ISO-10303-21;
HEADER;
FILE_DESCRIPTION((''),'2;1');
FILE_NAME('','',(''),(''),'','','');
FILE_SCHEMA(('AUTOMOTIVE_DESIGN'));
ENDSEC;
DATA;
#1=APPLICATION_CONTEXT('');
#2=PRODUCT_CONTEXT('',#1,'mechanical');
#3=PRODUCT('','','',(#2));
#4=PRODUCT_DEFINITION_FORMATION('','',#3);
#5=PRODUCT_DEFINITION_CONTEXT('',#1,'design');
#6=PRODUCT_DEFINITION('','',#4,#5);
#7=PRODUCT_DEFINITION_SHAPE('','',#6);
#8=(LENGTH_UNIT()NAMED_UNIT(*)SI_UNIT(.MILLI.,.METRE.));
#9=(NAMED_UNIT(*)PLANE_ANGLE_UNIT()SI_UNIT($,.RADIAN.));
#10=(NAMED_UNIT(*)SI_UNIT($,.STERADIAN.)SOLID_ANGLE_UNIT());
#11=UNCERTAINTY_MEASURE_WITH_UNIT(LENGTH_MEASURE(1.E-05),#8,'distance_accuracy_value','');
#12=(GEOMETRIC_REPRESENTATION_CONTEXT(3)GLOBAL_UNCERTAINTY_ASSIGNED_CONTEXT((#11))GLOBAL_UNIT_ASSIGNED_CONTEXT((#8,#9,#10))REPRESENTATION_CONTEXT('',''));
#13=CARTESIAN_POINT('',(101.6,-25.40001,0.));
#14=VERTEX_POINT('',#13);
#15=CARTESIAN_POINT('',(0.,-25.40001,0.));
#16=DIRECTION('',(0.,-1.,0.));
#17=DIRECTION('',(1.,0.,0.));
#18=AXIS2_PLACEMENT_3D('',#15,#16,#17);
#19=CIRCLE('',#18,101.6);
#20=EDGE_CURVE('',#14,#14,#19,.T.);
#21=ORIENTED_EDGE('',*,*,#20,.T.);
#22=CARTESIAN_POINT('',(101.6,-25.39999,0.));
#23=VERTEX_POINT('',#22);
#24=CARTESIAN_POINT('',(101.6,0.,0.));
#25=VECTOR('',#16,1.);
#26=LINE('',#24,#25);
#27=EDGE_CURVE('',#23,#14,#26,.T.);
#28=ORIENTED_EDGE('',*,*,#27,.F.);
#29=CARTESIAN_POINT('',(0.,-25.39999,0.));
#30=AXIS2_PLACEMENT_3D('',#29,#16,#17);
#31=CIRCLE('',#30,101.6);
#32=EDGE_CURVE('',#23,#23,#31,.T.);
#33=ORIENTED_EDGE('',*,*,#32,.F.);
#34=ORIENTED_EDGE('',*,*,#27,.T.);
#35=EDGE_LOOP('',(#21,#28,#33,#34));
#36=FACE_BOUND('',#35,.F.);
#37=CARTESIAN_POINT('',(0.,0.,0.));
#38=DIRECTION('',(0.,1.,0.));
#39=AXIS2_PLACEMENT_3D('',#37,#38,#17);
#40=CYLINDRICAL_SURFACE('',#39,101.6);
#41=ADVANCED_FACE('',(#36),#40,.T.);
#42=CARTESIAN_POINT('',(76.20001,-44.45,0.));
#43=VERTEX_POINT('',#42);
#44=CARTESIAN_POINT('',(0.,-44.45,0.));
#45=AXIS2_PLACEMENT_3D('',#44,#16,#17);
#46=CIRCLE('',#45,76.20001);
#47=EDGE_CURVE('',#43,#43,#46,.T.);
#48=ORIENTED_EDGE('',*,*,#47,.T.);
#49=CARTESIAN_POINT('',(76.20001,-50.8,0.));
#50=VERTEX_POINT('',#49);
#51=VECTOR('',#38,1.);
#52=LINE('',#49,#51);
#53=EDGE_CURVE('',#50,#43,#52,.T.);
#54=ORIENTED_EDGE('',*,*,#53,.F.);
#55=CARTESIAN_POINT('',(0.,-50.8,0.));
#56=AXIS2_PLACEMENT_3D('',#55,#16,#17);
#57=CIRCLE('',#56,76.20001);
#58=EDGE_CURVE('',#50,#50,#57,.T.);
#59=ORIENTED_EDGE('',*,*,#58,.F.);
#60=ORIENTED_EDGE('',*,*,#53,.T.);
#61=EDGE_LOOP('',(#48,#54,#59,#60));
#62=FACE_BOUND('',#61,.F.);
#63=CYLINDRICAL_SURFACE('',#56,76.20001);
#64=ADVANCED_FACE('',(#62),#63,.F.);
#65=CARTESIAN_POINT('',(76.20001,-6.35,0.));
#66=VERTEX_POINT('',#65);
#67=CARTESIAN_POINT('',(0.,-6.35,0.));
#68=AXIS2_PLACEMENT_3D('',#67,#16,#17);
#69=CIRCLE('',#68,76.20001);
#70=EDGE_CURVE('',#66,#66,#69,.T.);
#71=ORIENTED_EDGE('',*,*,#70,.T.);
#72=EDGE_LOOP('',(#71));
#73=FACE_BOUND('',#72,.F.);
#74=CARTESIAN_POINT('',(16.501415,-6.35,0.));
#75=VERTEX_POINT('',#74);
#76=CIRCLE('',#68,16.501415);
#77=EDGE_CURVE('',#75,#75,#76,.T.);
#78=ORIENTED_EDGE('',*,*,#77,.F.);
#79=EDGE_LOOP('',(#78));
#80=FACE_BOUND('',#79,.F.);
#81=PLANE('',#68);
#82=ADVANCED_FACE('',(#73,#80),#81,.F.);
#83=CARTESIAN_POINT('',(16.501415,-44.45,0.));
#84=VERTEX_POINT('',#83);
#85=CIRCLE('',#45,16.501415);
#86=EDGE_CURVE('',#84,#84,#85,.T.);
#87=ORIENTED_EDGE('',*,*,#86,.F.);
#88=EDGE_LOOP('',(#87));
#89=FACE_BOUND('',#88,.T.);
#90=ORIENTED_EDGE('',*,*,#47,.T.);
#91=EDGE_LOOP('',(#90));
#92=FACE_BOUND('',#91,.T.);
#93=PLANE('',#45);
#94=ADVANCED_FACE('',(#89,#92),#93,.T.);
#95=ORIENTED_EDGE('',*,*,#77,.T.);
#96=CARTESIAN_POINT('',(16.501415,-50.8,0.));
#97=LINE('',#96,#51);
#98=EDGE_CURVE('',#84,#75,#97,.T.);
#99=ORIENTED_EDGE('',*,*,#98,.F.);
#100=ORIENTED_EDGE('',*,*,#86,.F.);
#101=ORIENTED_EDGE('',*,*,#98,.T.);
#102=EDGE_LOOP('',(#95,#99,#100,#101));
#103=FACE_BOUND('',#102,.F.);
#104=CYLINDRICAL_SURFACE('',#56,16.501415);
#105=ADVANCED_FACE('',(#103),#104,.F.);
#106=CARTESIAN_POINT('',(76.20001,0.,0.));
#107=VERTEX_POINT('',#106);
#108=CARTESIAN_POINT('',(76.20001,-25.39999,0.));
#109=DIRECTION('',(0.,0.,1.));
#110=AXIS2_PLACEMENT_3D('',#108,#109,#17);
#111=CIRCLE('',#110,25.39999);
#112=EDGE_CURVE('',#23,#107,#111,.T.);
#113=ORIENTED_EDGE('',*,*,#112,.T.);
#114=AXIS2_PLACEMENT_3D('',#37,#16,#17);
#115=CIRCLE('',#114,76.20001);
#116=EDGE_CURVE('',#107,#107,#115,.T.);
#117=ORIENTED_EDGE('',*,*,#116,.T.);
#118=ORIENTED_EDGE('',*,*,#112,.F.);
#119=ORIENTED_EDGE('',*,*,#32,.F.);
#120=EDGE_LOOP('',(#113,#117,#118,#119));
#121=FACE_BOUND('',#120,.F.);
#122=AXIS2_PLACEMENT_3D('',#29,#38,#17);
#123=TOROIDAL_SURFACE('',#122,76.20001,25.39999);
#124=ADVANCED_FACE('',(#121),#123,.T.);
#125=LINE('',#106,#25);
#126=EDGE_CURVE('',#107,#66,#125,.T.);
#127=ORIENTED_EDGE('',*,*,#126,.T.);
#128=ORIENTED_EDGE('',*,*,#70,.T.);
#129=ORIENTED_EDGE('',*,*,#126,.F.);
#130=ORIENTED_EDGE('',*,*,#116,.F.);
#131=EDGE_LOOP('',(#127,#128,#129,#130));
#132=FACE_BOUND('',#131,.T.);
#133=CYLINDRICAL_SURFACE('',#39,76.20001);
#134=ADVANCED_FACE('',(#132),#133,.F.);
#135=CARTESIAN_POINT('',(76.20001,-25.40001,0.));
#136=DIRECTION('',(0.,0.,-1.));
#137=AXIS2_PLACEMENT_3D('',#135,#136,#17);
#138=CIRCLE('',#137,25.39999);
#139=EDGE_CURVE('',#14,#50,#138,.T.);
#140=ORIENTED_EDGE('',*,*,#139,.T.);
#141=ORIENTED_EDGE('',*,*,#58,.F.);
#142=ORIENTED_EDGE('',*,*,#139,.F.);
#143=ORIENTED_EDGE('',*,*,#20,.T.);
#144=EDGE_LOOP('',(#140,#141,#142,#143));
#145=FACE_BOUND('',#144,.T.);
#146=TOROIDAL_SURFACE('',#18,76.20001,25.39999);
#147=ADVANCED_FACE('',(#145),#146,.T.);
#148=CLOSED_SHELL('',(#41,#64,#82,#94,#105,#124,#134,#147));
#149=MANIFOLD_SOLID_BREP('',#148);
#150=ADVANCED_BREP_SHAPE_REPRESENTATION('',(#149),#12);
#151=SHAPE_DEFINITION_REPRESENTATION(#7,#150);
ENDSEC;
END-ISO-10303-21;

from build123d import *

# Parameters (mm, degrees)
F0_R     = 101.6
F1_DEPTH = 50.8
F2_R     = 25.39999
F3_R     = 16.5014152295
F4_DEPTH = 50.801
F5_DEPTH = 6.35
F6_DEPTH = 6.35


# Not quite as in the source:
# - a fillet or chamfer is up to 0.001 mm smaller than in the source, because OpenCascade refuses the exact size


with BuildPart() as f1:
    # F0 (on Front) → F1 (new body)
    with BuildSketch(Plane.XZ):
        Circle(F0_R)
    extrude(amount=F1_DEPTH)

    # F2 (radius 25.4 in the source; OpenCascade refuses exactly that, so slightly less here)
    f2_edges = [f1.edges().sort_by_distance(p)[0] for p in [
        (-101.6, -50.8, 0),
        (-101.6, 0, 0),
    ]]
    fillet(f2_edges, radius=F2_R)

    # F3 (on face) → F4 (cut, through all)
    with BuildSketch(Plane.XZ.offset(50.8)):
        Circle(F3_R)
    extrude(amount=-F4_DEPTH, mode=Mode.SUBTRACT)

    # F5 (cut): a face of the model
    f5_faces = [f1.faces().sort_by_distance(p)[0] for p in [
        (-74.0447482481, -50.8, 0),
    ]]
    extrude(f5_faces, amount=-F5_DEPTH, mode=Mode.SUBTRACT)

    # F6 (cut): a face of the model
    f6_faces = [f1.faces().sort_by_distance(p)[0] for p in [
        (-74.0447482481, 0, 0),
    ]]
    extrude(f6_faces, amount=-F6_DEPTH, mode=Mode.SUBTRACT)


solid = f1.part
